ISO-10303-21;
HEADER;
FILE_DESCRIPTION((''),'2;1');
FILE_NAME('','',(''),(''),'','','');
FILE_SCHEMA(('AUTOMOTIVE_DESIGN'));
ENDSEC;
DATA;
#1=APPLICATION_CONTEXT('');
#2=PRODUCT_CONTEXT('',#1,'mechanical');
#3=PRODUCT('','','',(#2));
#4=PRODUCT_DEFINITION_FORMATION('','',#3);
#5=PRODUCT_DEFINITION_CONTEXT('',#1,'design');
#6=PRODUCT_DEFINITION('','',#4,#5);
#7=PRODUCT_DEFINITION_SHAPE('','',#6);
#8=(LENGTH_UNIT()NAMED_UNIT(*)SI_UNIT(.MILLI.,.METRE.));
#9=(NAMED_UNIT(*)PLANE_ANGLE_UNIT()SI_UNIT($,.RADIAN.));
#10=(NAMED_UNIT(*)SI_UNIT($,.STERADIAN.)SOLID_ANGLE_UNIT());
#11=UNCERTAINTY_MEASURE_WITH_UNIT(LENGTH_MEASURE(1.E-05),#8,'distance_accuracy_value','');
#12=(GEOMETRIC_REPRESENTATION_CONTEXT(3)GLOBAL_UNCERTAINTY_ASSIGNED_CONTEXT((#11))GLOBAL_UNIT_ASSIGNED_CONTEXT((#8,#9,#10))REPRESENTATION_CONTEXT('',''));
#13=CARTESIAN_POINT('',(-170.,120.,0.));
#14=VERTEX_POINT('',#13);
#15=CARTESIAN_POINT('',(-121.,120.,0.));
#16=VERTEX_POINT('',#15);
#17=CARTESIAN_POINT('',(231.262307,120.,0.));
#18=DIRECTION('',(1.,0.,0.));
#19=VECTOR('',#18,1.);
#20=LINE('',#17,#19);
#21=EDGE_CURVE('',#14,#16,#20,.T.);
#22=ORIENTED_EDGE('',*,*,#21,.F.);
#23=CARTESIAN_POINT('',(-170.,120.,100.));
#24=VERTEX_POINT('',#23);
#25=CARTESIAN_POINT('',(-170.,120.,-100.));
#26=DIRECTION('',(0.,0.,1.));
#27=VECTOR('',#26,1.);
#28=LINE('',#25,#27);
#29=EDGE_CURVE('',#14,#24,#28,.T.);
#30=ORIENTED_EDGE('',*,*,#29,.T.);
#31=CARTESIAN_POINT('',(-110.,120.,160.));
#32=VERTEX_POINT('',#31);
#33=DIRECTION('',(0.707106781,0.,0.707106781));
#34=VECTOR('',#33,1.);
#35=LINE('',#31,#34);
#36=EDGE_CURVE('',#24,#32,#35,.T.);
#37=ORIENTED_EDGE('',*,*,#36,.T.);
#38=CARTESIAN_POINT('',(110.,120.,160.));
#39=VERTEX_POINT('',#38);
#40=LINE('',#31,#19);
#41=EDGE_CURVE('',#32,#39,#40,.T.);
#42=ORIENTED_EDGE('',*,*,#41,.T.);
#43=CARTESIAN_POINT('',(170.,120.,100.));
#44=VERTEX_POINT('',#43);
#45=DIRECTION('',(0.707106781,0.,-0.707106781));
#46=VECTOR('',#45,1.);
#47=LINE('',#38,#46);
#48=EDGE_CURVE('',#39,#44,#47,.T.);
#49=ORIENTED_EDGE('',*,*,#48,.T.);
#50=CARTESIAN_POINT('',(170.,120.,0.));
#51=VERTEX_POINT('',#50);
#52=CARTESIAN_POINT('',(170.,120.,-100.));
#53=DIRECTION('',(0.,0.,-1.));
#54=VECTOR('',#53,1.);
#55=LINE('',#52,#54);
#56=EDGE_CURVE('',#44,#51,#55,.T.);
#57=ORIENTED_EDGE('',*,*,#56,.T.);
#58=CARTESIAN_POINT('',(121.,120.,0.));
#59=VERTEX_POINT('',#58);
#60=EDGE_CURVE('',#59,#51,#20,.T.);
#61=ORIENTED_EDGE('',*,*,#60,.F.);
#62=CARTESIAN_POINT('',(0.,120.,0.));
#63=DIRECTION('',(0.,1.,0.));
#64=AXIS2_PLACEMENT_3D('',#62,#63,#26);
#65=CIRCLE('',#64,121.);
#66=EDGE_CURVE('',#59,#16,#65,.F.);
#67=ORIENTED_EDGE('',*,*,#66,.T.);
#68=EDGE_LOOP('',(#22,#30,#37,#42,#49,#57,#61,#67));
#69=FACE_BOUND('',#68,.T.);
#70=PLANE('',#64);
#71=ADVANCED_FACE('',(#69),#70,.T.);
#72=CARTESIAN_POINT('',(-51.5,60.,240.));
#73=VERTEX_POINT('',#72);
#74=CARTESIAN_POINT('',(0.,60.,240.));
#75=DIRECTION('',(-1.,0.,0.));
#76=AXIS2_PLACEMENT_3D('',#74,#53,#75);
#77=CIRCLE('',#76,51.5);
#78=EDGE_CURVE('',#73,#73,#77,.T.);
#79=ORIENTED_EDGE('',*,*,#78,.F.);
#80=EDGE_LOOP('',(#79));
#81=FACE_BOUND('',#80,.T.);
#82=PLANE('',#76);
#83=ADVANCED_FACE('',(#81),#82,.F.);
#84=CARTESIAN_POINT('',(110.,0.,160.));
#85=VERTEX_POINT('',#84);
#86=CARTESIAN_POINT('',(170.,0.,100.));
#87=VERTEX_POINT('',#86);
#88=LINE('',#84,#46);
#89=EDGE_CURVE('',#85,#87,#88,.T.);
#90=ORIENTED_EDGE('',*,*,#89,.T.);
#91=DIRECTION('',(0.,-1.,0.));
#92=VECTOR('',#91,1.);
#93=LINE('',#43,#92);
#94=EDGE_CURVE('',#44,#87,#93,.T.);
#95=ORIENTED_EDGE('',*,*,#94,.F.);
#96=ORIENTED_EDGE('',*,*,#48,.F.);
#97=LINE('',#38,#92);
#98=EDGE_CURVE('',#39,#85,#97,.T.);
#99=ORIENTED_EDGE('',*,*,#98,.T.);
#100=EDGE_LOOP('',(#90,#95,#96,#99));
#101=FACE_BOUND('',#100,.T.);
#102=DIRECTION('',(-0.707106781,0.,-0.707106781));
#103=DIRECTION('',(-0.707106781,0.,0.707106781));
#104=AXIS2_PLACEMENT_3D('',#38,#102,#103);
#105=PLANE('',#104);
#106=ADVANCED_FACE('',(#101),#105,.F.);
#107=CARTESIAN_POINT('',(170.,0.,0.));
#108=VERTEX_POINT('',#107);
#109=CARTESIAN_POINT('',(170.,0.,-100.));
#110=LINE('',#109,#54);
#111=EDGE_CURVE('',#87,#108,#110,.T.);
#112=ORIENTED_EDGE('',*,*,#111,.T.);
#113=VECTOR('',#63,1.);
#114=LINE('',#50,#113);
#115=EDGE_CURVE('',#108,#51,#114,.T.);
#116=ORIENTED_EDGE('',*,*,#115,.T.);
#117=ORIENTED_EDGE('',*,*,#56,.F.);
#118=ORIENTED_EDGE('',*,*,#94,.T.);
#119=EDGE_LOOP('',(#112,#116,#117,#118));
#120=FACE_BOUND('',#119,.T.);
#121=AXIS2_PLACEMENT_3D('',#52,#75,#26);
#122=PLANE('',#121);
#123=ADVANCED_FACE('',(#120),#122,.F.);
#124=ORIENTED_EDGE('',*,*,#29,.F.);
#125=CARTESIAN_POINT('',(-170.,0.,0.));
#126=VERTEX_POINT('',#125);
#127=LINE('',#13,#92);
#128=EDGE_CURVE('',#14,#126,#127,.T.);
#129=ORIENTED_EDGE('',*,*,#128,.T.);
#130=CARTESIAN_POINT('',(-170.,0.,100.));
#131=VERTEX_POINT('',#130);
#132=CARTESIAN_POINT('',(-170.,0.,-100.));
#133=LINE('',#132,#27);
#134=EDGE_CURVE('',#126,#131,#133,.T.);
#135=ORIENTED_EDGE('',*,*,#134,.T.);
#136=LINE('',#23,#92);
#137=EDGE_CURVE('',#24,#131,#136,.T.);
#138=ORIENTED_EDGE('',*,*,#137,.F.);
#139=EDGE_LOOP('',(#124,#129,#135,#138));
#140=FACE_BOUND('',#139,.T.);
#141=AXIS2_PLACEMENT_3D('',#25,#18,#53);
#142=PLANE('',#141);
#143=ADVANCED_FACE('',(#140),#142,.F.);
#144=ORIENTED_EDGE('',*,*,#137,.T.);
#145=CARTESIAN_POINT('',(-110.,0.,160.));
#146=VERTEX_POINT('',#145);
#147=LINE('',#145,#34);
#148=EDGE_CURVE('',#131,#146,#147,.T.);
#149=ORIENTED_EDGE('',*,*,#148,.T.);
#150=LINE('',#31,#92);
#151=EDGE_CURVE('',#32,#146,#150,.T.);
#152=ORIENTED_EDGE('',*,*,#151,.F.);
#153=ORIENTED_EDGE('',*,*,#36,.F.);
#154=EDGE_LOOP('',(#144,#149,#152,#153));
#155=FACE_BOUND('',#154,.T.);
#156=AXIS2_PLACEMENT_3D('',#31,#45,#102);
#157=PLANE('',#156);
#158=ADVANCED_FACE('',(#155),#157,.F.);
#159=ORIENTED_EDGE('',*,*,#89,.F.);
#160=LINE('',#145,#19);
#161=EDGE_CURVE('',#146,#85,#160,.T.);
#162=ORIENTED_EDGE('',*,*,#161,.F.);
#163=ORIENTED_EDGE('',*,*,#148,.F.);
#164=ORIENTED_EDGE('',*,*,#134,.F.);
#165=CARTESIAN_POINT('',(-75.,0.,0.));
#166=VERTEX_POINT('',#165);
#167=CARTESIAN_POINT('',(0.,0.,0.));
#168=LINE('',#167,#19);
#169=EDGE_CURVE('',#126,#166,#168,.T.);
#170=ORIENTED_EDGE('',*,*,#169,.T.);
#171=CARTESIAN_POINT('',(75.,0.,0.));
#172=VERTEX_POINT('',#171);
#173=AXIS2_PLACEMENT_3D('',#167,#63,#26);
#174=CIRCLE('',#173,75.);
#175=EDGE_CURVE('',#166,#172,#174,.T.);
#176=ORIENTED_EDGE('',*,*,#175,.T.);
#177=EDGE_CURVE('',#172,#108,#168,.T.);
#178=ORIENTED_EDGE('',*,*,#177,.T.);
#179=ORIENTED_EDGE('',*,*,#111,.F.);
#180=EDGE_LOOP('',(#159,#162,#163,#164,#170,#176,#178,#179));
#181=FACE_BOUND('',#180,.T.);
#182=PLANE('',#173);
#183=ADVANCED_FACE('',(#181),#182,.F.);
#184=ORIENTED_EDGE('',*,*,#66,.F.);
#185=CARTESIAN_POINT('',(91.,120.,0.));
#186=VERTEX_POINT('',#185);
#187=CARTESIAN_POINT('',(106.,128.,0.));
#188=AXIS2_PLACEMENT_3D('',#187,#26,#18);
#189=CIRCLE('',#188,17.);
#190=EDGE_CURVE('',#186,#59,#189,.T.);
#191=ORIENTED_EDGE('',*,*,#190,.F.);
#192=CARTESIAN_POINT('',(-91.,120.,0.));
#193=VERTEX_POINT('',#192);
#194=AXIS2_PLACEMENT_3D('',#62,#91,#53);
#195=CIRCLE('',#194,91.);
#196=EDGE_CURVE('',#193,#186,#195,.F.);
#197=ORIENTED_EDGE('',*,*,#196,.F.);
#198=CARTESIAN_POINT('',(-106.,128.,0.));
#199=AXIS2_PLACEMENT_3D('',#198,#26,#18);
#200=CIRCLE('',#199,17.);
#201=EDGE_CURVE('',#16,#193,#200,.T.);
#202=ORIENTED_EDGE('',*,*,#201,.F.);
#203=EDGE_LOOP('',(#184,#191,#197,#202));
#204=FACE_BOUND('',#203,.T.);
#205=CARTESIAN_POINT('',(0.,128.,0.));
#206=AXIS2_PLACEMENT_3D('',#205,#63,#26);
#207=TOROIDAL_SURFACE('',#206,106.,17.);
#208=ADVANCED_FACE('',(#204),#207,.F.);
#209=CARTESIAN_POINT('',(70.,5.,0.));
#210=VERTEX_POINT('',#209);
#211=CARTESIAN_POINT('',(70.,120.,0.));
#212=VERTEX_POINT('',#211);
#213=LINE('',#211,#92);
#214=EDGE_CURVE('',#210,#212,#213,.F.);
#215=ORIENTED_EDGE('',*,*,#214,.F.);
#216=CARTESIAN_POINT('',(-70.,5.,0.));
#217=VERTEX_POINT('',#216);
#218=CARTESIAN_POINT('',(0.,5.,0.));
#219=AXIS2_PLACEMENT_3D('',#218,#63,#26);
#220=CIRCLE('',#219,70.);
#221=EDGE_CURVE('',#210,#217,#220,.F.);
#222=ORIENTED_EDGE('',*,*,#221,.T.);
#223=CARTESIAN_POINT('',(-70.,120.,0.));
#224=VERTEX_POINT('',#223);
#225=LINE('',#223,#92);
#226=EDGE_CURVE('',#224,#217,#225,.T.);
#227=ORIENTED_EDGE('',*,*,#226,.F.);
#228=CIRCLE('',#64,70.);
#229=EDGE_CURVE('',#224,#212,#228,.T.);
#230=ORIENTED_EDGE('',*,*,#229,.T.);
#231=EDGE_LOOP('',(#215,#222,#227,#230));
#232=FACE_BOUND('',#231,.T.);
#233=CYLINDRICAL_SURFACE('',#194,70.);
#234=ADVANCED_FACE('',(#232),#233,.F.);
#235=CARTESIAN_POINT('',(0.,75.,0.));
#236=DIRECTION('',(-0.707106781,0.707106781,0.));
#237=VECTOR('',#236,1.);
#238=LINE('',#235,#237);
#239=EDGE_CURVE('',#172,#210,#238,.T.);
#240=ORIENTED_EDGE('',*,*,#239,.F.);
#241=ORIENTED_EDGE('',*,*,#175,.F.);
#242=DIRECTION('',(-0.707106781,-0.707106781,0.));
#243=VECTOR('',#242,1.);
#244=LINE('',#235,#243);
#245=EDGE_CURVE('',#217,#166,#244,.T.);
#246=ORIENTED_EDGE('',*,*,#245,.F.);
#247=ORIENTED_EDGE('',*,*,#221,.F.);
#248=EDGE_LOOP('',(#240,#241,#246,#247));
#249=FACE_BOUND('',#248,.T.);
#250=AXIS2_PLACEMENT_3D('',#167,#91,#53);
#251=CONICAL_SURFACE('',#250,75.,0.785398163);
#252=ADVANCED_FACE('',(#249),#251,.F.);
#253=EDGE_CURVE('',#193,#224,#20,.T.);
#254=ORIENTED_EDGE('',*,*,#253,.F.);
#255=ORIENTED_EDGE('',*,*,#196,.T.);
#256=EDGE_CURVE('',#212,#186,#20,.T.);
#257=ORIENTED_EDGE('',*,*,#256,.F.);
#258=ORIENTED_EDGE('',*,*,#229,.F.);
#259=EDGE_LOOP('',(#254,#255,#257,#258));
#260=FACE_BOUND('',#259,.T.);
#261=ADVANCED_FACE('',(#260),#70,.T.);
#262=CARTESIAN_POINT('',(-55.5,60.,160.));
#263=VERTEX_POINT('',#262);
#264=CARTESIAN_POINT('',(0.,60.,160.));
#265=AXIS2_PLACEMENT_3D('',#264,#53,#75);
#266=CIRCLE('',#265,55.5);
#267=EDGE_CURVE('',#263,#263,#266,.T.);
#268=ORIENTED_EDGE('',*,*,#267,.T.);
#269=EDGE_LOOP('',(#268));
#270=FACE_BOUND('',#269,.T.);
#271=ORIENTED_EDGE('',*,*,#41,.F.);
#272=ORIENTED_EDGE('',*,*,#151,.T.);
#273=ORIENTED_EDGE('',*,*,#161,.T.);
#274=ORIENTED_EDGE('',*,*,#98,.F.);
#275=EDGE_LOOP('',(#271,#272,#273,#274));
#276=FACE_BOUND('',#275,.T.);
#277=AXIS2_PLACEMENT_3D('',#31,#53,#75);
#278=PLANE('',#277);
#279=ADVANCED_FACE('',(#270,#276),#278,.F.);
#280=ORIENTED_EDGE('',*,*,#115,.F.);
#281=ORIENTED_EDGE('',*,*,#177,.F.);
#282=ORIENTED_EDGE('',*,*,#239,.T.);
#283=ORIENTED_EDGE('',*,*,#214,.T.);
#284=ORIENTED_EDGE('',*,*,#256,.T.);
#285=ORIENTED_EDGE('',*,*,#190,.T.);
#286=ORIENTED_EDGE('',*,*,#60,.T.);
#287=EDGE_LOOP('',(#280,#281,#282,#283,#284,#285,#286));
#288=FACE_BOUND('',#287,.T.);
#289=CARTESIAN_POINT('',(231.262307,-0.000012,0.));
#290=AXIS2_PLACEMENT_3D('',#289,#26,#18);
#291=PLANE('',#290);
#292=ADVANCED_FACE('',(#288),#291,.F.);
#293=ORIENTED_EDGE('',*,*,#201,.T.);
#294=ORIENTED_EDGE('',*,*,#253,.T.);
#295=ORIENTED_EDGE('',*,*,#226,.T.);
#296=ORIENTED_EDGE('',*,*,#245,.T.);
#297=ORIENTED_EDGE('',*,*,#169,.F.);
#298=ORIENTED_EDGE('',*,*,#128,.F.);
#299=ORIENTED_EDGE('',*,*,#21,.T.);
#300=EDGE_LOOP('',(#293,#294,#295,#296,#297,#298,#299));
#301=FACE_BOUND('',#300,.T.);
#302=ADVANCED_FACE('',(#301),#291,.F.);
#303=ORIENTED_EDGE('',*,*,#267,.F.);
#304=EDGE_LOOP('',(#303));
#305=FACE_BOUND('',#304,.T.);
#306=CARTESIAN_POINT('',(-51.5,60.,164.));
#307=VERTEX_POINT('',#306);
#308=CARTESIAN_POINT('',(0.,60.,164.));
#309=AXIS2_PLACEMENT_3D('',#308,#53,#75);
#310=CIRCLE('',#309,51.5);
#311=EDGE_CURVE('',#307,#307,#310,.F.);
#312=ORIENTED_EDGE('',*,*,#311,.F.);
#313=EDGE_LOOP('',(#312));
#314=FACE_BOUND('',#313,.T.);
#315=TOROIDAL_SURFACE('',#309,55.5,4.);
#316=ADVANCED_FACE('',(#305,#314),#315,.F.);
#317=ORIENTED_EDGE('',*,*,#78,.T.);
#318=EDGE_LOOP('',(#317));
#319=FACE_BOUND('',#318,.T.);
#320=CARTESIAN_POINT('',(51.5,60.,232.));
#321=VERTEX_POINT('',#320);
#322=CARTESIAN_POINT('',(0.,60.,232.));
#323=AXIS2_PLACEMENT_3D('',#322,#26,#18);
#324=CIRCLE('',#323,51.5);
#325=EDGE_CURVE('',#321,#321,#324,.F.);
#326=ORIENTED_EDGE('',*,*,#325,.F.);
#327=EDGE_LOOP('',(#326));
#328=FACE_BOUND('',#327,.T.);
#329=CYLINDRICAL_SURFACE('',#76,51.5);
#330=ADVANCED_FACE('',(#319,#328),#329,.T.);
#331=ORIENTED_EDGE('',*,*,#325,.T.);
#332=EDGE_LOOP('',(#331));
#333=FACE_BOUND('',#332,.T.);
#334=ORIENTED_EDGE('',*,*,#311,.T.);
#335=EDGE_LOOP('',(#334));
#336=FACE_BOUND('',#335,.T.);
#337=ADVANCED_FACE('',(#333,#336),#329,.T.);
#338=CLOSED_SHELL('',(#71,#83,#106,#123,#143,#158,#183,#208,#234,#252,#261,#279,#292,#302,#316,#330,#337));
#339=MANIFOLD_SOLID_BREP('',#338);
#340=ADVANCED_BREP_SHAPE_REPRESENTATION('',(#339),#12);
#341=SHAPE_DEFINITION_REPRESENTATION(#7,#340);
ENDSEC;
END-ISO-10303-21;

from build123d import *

# Parameters (mm, degrees)
MAIN_DEPTH              = 120
PERNO1_START            = 160
PERNO1_OUTLINE_R        = 51.5
PERNO1_DEPTH            = 80
PERNO1_2_OUTLINE_R      = 70
PERNO1_2_DEPTH          = 120
FILLET2_R               = 4
FILLET2_OF_MIRROR14_R   = 4
CHAMFER2_SIZE           = 5
PISTA_R                 = 17
CUT_EXTRUDE1_DEPTH      = 318.647603485
CUT_EXTRUDE1_DEPTH_BACK = 318.647603485
SKETCH12_W              = 447.780773858
SKETCH12_H              = 289.463518693


# Read off the part's stored shape, not the designer's step: Perno1
with BuildPart() as part:
    # MainBody → Main (new body)
    with BuildSketch(Plane(origin=(0, 0, 0), x_dir=(1, 0, 0), z_dir=(0, 1, 0))):
        Polygon((-110, 160), (110, 160), (170, 100), (170, -100), (110, -160), (-110, -160), (-170, -100), (-170, 100), align=None)
    extrude(amount=MAIN_DEPTH)

    # Perno1 outline → Perno1 (add)
    with BuildSketch(Plane.XY.offset(PERNO1_START)):
        with Locations((0, 60)):
            Circle(PERNO1_OUTLINE_R)
    perno1 = extrude(amount=PERNO1_DEPTH)

    # Perno1 2 outline → Perno1 2 (cut)
    with BuildSketch(Plane(origin=(0, 0, 0), x_dir=(1, 0, 0), z_dir=(0, 1, 0))):
        Circle(PERNO1_2_OUTLINE_R)
    perno1_2 = extrude(amount=PERNO1_2_DEPTH, mode=Mode.SUBTRACT)

    # Fillet2
    fillet2_edges = [part.edges().sort_by_distance(p)[0] for p in [
        (-51.5, 60, 160),
    ]]
    fillet(fillet2_edges, radius=FILLET2_R)

    # Mirror14: Perno1, Perno1 2 across plane
    add(perno1.mirror(Plane.XY))
    add(perno1_2.mirror(Plane.XY), mode=Mode.SUBTRACT)

    # Fillet2 of Mirror14
    fillet2_of_mirror14_edges = [part.edges().sort_by_distance(p)[0] for p in [
        (-51.5, 60, -160),
    ]]
    fillet(fillet2_of_mirror14_edges, radius=FILLET2_OF_MIRROR14_R)

    # Chamfer2
    chamfer2_edges = [part.edges().sort_by_distance(p)[0] for p in [
        (-70, 0, 0),
    ]]
    chamfer(chamfer2_edges, length=CHAMFER2_SIZE)

    # Pista → PistaCut (revolve, cut)
    with BuildSketch(Plane.XY, mode=Mode.PRIVATE) as pistacut_sk:
        with Locations((106, 128)):
            Circle(PISTA_R)
    revolve(pistacut_sk.sketch.rotate(Axis((0, 120, 0), (0, -1, 0)), 90), axis=Axis((0, 120, 0), (0, -1, 0)), mode=Mode.SUBTRACT)

    # Sketch12 → Cut-Extrude1 (cut, two sides: drawn at the far end of the back side and taken through both)
    with BuildSketch(Plane(origin=(0, 0, 0), x_dir=(1, 0, 0), z_dir=(0, 1, 0)).offset(-CUT_EXTRUDE1_DEPTH_BACK)):
        with Locations((7.371920004, 144.731759347)):
            Rectangle(SKETCH12_W, SKETCH12_H)
    extrude(amount=CUT_EXTRUDE1_DEPTH + CUT_EXTRUDE1_DEPTH_BACK, mode=Mode.SUBTRACT)


solid = part.part
